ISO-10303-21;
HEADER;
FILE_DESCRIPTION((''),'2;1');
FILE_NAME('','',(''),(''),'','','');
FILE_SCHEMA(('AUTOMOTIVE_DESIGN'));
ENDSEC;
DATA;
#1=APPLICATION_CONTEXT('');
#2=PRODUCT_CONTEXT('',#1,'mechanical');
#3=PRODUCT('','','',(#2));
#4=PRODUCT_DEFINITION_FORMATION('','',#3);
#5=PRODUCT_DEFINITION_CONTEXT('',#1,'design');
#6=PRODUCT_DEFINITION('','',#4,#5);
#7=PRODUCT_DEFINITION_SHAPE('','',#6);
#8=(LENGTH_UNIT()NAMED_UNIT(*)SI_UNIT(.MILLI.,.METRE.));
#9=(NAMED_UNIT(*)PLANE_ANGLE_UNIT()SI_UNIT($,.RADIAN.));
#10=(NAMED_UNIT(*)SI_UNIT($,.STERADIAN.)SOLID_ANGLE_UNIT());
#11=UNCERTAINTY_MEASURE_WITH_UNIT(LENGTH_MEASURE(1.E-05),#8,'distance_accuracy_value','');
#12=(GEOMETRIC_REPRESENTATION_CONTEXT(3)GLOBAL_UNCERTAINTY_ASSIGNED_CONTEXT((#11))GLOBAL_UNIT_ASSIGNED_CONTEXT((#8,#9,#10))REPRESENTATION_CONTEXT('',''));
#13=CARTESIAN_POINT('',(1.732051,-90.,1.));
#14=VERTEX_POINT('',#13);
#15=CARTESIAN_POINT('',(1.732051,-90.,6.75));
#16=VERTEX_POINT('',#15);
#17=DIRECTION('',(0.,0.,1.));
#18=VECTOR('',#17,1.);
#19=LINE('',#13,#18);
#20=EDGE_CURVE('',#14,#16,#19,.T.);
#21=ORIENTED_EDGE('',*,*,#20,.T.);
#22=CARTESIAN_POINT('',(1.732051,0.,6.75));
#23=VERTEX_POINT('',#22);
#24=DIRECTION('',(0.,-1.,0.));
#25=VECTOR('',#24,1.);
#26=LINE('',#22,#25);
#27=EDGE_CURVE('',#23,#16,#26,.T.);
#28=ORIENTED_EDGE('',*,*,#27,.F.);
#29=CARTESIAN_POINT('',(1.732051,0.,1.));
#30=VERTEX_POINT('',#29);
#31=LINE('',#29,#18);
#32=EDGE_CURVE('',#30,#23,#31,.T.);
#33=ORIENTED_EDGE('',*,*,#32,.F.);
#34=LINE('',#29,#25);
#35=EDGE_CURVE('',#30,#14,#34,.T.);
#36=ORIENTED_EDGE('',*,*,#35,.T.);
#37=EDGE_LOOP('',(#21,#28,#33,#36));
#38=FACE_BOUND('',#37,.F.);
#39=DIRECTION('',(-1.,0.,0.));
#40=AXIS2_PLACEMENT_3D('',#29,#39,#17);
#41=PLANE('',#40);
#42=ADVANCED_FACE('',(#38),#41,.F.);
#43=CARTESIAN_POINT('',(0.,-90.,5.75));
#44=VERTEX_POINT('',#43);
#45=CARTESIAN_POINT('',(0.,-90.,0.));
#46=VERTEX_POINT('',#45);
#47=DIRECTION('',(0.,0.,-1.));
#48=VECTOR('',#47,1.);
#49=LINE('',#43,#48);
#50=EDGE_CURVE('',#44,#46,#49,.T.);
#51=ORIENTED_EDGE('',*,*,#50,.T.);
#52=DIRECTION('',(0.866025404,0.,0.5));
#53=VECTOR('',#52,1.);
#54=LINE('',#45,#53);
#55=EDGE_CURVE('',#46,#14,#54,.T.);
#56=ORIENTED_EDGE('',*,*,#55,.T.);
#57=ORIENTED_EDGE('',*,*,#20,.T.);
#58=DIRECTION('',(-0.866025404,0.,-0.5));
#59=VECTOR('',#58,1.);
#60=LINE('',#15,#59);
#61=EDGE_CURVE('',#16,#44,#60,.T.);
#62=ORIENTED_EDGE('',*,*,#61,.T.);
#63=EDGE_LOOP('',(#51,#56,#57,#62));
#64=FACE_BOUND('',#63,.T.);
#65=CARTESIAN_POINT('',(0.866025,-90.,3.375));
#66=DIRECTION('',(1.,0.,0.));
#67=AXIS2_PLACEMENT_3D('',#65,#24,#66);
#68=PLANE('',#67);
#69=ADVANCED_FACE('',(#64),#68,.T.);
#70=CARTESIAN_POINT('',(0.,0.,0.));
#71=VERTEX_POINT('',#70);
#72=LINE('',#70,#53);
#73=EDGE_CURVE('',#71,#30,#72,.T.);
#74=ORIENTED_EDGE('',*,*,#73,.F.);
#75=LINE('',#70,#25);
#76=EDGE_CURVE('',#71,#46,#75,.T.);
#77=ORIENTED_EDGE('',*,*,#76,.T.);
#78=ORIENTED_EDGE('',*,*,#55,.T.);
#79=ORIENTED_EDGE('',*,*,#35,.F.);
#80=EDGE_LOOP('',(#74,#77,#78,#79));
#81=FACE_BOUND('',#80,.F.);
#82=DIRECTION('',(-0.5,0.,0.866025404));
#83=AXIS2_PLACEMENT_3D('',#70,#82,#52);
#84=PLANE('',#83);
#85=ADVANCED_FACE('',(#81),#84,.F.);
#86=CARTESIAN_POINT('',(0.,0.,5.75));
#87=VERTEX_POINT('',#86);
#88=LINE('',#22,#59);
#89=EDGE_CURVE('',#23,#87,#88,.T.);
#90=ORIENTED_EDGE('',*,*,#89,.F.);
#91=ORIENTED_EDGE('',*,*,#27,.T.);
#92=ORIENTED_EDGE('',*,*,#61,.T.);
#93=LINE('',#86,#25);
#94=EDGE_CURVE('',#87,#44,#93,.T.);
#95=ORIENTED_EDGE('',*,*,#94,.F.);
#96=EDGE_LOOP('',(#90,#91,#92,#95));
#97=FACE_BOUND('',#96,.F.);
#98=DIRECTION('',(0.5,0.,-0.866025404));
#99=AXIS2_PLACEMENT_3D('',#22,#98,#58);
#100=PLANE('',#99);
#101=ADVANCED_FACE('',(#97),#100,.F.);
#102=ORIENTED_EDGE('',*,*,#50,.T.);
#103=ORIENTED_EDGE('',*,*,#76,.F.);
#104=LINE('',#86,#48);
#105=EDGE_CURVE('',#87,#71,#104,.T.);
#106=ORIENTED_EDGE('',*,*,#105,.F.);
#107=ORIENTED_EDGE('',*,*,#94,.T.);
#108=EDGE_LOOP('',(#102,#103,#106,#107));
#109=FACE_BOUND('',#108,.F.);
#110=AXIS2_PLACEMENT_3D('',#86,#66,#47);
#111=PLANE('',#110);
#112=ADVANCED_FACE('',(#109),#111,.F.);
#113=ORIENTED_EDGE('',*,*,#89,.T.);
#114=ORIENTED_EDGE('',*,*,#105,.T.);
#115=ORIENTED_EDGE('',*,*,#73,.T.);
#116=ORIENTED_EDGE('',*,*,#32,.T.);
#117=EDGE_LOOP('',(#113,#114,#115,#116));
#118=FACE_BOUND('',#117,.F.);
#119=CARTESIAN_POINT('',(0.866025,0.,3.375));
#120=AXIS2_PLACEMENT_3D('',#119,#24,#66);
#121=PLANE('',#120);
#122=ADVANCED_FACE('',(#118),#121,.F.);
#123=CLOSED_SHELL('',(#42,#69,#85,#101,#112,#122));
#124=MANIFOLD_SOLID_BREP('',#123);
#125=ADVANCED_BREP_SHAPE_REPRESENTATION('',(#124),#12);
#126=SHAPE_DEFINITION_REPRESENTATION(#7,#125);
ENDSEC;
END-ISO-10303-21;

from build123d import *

# Parameters (mm, degrees)
F1_DEPTH = 90


# Not quite as in the source:
# - a feature names something its author has since deleted; it is built from what else it names


with BuildPart() as f1:
    # F0 (on Front) → F1 (new body)
    with BuildSketch(Plane.XZ):
        Polygon((0, 5.75), (0, 0), (1.7320508076, 1), (1.7320508076, 6.75), align=None)
    extrude(amount=F1_DEPTH)


solid = f1.part
